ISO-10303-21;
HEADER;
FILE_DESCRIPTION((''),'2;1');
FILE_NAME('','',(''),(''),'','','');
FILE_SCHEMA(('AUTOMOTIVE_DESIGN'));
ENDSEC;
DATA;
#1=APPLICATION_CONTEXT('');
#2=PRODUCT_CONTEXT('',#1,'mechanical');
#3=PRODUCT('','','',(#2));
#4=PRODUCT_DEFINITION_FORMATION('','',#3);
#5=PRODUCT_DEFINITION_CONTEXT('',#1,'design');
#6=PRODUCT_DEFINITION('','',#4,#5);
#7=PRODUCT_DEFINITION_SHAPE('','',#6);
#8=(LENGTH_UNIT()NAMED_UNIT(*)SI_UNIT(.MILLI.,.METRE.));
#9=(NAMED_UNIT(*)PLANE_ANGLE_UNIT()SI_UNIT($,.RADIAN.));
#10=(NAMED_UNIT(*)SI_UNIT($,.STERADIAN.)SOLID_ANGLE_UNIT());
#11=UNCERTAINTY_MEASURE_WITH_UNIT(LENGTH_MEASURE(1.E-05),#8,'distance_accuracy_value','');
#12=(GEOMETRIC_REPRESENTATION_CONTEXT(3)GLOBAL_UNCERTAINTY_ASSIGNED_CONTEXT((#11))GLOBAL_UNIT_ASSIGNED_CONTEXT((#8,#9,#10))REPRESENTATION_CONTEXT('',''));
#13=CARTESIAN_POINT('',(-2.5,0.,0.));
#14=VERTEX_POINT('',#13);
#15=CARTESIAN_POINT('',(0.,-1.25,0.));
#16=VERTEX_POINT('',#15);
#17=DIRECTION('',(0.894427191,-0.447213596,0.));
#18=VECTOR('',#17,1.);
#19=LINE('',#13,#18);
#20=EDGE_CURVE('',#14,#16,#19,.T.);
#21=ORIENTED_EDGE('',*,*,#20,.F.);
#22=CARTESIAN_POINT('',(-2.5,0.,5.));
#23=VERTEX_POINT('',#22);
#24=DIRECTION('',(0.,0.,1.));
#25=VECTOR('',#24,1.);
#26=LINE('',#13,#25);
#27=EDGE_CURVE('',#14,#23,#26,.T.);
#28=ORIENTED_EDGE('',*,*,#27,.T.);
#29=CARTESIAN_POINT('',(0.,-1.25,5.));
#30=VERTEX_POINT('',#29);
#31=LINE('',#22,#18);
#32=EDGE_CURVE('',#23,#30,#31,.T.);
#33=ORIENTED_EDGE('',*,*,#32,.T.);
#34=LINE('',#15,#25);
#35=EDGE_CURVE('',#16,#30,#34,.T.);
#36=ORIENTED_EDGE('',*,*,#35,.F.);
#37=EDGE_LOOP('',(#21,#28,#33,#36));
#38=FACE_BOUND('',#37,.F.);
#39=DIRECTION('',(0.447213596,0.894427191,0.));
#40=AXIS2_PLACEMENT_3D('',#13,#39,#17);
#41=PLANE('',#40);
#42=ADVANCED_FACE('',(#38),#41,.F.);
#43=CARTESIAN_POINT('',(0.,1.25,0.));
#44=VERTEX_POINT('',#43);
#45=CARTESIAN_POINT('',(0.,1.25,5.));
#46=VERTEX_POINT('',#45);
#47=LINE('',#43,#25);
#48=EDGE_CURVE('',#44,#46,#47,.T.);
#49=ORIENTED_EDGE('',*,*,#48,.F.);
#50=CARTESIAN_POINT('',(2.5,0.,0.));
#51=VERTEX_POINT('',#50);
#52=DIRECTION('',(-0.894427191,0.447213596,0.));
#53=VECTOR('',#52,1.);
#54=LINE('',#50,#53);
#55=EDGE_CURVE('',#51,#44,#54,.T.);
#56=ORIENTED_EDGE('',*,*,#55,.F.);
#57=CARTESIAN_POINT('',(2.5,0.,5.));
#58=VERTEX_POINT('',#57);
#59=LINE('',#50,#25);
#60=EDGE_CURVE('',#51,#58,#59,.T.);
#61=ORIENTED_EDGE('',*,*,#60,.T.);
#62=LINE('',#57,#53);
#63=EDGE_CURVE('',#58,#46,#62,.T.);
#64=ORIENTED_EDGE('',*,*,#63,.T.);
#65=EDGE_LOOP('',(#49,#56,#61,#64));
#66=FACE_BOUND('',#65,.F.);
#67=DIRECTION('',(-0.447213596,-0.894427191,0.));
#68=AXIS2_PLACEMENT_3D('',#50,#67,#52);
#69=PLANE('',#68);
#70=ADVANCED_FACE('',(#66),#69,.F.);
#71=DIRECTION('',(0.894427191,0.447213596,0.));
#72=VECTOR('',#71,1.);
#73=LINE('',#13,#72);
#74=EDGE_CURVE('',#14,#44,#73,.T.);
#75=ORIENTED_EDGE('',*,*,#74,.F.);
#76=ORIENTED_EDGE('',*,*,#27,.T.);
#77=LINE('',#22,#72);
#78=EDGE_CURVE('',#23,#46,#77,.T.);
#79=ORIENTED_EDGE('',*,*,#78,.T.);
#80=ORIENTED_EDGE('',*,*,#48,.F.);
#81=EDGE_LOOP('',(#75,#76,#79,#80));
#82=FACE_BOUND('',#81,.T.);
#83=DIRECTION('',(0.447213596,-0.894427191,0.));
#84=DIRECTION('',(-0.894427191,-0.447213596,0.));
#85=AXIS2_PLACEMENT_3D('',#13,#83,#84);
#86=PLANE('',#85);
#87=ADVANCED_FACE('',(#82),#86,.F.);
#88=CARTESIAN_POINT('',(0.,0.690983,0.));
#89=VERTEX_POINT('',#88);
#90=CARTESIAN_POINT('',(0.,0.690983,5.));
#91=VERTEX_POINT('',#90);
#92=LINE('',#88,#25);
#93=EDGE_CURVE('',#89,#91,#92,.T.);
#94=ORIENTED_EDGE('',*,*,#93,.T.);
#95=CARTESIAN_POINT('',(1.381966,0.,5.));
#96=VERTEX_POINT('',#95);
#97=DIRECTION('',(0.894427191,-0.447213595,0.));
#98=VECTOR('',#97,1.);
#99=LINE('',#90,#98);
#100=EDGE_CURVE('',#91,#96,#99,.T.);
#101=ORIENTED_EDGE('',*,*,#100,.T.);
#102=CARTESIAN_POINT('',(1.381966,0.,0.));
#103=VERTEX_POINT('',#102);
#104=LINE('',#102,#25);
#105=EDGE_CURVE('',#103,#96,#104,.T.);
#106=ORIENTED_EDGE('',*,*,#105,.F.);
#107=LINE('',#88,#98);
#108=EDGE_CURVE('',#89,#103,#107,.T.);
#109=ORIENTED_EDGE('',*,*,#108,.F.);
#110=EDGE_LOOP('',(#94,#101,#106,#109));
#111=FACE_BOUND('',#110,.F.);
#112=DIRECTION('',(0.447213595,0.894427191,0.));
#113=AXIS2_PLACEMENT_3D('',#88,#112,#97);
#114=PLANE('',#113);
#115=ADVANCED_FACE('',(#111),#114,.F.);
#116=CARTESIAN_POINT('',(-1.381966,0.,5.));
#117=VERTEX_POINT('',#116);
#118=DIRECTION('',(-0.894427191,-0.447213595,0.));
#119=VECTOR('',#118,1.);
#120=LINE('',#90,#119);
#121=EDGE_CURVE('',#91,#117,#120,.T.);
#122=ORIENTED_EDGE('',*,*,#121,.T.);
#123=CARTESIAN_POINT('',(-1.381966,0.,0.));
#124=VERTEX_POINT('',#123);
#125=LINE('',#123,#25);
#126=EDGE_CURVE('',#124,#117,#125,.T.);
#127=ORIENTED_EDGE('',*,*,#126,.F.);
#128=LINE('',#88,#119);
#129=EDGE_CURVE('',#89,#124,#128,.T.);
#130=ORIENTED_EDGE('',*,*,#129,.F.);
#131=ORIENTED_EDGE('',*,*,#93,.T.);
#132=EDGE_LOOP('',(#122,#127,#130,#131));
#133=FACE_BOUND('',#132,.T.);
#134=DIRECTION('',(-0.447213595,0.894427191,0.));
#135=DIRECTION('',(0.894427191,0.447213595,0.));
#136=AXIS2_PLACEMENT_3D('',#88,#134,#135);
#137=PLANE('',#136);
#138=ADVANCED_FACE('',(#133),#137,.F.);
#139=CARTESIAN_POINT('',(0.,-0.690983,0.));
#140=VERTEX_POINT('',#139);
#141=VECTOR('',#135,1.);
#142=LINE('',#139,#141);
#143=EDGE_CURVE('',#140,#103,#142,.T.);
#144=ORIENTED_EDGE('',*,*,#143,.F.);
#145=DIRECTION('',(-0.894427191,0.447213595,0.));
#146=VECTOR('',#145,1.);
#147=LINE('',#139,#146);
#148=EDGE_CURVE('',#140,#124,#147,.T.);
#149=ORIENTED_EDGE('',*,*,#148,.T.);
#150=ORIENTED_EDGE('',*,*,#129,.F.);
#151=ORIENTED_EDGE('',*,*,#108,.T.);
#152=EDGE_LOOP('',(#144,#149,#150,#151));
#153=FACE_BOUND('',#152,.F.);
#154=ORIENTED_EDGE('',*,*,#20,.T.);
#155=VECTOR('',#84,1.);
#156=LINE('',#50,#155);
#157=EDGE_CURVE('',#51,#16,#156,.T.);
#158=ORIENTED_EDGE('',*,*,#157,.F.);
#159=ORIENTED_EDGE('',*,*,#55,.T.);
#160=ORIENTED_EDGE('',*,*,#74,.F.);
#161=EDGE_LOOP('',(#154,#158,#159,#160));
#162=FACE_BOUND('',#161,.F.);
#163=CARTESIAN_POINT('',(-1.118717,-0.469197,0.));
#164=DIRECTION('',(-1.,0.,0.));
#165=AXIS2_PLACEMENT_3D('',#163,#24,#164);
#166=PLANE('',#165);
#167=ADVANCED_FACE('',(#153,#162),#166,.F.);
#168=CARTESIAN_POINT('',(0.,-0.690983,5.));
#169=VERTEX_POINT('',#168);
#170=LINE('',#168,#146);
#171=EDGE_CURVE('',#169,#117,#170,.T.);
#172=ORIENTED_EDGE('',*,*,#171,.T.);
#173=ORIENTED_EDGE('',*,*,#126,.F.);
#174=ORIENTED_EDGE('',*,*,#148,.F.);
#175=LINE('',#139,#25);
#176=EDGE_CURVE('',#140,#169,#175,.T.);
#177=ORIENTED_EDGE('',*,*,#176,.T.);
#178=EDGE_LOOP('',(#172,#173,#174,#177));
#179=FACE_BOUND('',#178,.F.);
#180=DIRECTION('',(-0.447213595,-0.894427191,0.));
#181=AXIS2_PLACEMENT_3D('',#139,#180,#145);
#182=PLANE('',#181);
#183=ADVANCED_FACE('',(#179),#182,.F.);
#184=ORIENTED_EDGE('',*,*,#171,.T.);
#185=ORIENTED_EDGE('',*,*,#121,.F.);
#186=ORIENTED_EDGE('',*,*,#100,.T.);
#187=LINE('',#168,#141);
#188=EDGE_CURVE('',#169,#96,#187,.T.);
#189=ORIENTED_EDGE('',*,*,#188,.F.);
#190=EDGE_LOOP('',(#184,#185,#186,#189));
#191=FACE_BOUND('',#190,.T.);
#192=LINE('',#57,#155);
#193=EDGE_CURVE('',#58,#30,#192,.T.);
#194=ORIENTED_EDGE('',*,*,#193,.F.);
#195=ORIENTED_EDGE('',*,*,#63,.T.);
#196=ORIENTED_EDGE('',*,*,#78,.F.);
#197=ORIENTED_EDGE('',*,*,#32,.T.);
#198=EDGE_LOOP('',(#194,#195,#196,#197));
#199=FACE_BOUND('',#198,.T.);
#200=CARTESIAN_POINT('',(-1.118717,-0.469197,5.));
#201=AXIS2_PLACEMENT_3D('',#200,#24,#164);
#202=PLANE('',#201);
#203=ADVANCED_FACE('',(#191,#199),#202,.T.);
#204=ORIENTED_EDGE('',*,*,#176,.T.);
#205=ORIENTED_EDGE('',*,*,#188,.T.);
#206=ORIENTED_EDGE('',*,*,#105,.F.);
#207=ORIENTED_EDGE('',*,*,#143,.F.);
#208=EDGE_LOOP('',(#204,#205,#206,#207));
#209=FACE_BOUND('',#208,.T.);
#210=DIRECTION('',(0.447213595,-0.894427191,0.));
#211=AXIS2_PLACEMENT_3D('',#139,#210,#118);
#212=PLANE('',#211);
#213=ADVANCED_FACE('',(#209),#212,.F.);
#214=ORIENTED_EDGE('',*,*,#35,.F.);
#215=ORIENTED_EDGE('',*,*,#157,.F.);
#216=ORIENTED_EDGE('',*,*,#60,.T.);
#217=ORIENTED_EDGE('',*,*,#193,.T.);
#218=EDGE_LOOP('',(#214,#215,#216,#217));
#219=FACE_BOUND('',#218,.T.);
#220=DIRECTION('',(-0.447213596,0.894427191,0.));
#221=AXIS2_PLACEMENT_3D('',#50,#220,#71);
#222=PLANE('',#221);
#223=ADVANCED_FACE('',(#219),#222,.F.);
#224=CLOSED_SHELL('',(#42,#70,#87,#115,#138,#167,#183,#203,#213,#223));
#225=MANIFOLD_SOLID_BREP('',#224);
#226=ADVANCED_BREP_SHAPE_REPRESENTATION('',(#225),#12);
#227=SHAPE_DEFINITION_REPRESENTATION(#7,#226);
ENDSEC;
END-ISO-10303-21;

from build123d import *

# Parameters (mm, degrees)
F2_DEPTH = 5


# Not quite as in the source:
# - a pattern or mirror of a feature is missing from the dataset's text; its kind, count and spacing are read off the source's solid
# - a feature names something its author has since deleted; it is built from what else it names


with BuildPart() as f2:
    # F1 (on Top) → F2 (new body)
    with BuildSketch(Plane.XY):
        Polygon((0, 1.25), (0, 0.6909830056), (1.3819660113, 0), (2.5, 0), align=None)
    extrude(amount=F2_DEPTH)

    # F2_copies: F2 across plane


with BuildPart() as f2_1:
    add(f2.part)
    add(f2.part.mirror(Plane(origin=(0, 0, 0), x_dir=(0, 0, -1), z_dir=(0, -1, 0))))

    # F2_copies1: F2 across plane


with BuildPart() as f2_2:
    add(f2_1.part)
    add(f2_1.part.mirror(Plane(origin=(0, 0, 0), x_dir=(0, 0, -1), z_dir=(-1, 0, 0))))


solid = f2_2.part
